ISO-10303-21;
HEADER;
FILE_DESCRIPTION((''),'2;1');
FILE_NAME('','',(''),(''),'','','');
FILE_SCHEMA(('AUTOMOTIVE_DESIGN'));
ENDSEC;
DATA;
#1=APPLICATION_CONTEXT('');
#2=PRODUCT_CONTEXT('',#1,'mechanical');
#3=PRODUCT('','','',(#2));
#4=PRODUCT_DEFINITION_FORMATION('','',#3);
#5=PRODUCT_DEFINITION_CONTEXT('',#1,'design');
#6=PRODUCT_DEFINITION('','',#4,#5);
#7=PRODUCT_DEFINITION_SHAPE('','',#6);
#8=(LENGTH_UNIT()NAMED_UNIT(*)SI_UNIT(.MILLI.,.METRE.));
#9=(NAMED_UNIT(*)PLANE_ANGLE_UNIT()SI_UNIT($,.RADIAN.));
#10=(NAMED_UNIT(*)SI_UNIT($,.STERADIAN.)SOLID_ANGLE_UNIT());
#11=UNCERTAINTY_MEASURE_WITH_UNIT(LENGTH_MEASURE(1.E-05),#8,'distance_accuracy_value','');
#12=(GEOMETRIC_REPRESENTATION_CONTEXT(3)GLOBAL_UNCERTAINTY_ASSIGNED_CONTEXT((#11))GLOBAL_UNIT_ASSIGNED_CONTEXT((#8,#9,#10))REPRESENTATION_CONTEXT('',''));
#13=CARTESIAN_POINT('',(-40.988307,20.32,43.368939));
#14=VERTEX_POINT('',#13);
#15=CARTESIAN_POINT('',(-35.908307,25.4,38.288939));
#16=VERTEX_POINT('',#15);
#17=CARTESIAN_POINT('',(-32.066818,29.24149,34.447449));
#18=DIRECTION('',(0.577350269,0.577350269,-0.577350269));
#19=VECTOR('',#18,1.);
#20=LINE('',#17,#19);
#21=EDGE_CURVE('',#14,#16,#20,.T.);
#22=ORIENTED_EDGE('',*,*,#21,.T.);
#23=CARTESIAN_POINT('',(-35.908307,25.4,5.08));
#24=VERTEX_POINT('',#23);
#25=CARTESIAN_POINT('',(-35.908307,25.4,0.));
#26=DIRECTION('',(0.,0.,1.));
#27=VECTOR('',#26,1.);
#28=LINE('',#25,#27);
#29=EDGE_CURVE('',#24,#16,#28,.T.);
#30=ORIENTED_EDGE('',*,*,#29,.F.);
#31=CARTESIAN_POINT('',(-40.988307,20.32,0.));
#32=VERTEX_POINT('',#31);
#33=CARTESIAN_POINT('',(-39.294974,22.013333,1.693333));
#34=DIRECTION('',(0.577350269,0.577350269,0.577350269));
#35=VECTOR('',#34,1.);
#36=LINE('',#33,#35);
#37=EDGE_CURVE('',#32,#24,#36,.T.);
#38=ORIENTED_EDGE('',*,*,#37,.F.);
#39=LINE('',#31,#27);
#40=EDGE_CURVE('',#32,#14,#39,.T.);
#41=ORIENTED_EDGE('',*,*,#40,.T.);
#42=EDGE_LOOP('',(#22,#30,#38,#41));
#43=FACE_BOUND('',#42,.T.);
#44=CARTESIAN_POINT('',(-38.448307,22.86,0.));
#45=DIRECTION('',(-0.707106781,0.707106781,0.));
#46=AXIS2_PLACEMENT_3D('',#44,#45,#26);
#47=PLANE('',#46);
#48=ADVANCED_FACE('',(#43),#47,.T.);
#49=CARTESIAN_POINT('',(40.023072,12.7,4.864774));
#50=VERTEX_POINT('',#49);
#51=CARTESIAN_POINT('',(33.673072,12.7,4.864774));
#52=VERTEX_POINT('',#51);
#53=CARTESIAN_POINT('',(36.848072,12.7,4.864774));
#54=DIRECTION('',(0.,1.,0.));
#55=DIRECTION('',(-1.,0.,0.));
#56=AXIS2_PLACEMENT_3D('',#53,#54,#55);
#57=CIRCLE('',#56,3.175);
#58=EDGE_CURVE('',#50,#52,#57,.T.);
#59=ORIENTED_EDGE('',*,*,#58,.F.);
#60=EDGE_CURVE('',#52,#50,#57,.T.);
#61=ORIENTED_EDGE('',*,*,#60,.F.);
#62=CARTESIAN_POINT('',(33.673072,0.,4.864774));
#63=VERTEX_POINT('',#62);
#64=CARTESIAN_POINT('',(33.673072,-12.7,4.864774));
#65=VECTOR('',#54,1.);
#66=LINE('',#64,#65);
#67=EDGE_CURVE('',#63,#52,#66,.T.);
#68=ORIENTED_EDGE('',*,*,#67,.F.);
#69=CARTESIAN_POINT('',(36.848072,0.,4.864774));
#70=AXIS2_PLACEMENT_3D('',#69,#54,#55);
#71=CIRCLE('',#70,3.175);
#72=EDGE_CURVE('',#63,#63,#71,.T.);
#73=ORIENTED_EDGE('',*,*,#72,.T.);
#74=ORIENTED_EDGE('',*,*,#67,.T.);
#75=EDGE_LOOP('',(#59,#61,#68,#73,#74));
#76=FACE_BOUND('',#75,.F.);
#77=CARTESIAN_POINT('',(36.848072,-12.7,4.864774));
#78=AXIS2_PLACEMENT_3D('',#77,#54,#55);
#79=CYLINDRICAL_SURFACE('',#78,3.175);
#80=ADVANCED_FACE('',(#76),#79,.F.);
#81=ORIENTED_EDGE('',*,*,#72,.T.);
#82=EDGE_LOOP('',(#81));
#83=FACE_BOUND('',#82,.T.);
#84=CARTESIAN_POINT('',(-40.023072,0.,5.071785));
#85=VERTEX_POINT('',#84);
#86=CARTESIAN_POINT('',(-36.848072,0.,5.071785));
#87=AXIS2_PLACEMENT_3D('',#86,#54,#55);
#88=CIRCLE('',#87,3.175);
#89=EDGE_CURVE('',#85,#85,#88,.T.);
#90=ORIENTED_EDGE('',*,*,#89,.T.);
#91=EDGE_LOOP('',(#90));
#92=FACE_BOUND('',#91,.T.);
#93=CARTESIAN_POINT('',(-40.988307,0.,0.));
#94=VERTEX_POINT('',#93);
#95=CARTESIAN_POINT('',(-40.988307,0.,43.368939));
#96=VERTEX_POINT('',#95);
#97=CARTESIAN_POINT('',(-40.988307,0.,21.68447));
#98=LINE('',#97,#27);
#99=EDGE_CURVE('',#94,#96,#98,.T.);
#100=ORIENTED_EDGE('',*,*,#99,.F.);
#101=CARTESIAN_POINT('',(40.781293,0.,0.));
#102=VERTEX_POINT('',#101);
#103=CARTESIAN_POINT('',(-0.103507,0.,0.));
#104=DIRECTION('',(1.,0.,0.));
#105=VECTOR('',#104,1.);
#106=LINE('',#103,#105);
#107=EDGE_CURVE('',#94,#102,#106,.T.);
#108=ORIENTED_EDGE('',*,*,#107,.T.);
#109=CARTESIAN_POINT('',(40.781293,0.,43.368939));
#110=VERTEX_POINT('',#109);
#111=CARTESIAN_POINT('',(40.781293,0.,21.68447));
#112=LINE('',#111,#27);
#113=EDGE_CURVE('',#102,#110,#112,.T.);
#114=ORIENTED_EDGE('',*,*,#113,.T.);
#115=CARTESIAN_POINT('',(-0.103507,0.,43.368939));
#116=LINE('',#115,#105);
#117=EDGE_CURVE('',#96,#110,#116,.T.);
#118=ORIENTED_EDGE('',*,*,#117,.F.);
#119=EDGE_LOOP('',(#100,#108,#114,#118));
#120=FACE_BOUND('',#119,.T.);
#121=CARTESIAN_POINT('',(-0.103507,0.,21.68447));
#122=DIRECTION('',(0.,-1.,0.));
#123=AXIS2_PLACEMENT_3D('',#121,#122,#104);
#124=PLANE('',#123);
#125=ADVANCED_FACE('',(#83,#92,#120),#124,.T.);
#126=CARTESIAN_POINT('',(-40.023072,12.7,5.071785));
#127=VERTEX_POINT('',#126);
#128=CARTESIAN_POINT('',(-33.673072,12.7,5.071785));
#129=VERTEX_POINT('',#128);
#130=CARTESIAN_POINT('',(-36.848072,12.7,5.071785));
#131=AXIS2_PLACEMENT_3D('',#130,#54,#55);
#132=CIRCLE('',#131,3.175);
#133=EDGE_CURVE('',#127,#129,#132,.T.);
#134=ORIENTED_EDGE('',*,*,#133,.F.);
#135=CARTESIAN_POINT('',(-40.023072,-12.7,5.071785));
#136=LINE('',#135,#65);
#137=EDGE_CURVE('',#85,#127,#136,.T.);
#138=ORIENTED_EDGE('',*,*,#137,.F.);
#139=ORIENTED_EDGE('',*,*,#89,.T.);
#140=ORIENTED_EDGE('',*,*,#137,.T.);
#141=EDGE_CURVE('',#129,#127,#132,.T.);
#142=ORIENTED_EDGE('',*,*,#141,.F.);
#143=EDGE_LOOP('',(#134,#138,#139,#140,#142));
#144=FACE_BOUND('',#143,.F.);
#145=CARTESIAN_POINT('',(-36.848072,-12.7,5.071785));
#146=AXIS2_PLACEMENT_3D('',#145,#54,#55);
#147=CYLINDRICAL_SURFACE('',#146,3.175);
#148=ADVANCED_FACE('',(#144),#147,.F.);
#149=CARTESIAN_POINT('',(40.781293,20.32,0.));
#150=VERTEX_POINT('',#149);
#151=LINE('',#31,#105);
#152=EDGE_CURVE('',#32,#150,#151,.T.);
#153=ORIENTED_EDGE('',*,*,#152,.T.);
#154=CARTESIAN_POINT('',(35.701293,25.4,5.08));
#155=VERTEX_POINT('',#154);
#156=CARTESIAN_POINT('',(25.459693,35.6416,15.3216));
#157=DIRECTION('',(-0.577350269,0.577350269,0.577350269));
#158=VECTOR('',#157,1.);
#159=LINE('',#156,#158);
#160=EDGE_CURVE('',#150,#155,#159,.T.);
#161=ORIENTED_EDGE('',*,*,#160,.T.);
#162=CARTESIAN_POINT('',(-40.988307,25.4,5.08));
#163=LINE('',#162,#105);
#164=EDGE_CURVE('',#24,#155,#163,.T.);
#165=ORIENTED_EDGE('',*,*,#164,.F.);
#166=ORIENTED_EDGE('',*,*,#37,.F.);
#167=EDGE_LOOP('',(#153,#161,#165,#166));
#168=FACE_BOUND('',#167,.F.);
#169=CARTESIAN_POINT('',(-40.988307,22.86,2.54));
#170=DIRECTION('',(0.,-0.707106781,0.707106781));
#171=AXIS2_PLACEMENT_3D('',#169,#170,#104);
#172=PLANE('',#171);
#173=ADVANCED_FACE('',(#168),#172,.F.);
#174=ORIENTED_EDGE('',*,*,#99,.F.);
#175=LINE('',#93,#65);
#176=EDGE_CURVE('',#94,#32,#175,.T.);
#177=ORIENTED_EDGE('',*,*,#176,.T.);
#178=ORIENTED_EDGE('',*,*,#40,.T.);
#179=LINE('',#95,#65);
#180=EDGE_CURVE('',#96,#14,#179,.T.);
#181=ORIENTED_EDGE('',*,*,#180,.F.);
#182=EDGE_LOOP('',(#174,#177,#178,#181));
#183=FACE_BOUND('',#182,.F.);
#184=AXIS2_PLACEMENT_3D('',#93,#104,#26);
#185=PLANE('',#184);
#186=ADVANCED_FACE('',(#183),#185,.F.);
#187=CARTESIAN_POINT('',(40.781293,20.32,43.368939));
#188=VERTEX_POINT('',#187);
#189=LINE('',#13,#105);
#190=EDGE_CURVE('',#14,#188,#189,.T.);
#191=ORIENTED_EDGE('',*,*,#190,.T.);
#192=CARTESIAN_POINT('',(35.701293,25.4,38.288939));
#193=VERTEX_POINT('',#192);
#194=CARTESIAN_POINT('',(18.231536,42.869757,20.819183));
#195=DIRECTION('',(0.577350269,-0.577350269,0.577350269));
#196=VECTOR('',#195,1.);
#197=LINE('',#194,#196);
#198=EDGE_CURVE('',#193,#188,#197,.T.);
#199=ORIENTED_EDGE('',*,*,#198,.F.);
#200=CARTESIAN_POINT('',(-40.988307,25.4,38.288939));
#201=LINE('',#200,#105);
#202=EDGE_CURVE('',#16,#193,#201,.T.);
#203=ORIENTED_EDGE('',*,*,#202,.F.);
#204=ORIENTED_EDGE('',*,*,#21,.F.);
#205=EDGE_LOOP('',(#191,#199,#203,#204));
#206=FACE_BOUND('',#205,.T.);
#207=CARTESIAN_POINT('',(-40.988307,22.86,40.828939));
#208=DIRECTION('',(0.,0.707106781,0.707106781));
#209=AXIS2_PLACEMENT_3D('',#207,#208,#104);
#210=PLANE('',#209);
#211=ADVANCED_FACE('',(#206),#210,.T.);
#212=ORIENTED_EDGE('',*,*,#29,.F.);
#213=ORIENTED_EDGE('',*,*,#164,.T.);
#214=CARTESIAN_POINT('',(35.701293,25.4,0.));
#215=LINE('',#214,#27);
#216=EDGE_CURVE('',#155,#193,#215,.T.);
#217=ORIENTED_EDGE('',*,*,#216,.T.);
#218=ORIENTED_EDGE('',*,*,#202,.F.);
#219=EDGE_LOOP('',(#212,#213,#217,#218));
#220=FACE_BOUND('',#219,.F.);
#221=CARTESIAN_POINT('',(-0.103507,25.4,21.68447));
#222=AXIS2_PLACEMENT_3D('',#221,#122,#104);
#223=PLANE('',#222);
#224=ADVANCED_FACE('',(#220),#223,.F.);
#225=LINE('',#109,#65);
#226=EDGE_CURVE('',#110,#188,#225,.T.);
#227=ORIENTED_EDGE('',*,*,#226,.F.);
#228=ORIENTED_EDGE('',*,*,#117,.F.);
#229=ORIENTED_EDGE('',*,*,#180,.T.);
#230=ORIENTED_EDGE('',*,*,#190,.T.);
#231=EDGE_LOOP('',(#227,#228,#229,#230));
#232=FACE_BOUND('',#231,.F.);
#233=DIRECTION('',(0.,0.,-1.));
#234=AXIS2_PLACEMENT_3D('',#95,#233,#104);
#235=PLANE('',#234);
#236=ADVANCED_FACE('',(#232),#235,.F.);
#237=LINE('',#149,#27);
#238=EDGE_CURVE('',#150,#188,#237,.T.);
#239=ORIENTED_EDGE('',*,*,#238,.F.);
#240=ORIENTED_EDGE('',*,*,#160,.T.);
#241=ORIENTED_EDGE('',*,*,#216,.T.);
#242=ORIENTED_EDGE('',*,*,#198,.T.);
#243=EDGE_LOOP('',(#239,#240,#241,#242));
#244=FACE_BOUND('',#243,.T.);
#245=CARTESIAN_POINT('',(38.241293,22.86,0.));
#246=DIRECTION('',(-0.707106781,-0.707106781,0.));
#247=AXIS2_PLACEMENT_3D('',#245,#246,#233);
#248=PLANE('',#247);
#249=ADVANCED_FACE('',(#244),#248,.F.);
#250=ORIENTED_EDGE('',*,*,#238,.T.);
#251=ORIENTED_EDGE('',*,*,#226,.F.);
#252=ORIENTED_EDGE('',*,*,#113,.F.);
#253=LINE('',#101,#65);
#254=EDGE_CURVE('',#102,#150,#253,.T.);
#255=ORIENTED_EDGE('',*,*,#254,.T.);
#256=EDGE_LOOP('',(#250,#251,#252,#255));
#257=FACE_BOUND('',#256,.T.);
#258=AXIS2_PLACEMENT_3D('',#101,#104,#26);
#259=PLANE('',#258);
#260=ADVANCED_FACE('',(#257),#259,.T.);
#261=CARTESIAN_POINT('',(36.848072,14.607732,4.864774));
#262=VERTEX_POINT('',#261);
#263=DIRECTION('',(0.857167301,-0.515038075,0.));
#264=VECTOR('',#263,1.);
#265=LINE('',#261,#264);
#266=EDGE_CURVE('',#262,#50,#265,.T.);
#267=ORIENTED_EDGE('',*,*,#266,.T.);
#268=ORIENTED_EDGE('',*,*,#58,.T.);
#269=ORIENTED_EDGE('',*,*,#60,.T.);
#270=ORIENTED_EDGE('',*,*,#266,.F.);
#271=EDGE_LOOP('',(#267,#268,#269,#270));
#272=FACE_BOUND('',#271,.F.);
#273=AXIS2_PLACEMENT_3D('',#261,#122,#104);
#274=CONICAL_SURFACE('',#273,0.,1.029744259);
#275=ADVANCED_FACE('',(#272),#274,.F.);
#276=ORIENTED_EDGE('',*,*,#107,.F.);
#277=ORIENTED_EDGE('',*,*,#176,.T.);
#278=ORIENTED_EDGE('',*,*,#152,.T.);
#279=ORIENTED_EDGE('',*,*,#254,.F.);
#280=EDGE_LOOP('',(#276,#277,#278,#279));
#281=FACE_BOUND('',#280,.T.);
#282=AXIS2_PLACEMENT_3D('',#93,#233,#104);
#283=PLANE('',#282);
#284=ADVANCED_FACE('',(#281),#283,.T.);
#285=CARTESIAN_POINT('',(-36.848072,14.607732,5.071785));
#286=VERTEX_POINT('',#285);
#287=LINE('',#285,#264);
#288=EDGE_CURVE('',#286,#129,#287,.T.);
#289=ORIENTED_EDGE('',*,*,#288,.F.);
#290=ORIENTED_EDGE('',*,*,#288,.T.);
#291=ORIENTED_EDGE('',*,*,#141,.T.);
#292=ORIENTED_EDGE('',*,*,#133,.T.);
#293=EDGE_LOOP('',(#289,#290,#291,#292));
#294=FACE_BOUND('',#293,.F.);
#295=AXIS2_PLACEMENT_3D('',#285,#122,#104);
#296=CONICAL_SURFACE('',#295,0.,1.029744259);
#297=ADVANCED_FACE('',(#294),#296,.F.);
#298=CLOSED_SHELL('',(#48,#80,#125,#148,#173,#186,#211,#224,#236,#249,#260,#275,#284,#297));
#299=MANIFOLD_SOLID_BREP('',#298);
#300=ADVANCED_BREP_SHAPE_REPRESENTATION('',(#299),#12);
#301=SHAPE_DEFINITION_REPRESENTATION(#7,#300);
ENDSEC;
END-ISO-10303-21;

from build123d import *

# Parameters (mm, degrees)
F0_W     = 81.7696005106
F0_H     = 43.3689393103
F1_DEPTH = 25.4
F3_D     = 6.35
F3_DEPTH = 12.7
F3_TIP   = 1.9077324654
F5_SIZE  = 5.08


# Not quite as in the source:
# - the program builds the solid bodies; features that only make, move or delete a surface that nothing else refers to are left out


with BuildPart() as f1:
    # F0 (on Front) → F1 (new body)
    with BuildSketch(Plane.XZ):
        with Locations((-0.1035071909, 21.6844696552)):
            Rectangle(F0_W, F0_H)
    extrude(amount=-F1_DEPTH)

    # F3
    with Locations(Plane.XZ):
        with Locations((36.8480719626, 4.8647737131), (-36.8480719626, 5.071785301)):
            Hole(F3_D / 2, depth=F3_DEPTH)
            with Locations((0, 0, -(F3_DEPTH + F3_TIP / 2))):  # 118° drill point
                Cone(0, F3_D / 2, F3_TIP, mode=Mode.SUBTRACT)

    # F5
    f5_edges = [f1.edges().sort_by_distance(p)[0] for p in [
        (-40.988307, 25.4, 21.68447),
        (-0.103507, 25.4, 0),
        (40.781293, 25.4, 21.68447),
        (-0.103507, 25.4, 43.368939),
    ]]
    chamfer(f5_edges, length=F5_SIZE)


solid = f1.part
